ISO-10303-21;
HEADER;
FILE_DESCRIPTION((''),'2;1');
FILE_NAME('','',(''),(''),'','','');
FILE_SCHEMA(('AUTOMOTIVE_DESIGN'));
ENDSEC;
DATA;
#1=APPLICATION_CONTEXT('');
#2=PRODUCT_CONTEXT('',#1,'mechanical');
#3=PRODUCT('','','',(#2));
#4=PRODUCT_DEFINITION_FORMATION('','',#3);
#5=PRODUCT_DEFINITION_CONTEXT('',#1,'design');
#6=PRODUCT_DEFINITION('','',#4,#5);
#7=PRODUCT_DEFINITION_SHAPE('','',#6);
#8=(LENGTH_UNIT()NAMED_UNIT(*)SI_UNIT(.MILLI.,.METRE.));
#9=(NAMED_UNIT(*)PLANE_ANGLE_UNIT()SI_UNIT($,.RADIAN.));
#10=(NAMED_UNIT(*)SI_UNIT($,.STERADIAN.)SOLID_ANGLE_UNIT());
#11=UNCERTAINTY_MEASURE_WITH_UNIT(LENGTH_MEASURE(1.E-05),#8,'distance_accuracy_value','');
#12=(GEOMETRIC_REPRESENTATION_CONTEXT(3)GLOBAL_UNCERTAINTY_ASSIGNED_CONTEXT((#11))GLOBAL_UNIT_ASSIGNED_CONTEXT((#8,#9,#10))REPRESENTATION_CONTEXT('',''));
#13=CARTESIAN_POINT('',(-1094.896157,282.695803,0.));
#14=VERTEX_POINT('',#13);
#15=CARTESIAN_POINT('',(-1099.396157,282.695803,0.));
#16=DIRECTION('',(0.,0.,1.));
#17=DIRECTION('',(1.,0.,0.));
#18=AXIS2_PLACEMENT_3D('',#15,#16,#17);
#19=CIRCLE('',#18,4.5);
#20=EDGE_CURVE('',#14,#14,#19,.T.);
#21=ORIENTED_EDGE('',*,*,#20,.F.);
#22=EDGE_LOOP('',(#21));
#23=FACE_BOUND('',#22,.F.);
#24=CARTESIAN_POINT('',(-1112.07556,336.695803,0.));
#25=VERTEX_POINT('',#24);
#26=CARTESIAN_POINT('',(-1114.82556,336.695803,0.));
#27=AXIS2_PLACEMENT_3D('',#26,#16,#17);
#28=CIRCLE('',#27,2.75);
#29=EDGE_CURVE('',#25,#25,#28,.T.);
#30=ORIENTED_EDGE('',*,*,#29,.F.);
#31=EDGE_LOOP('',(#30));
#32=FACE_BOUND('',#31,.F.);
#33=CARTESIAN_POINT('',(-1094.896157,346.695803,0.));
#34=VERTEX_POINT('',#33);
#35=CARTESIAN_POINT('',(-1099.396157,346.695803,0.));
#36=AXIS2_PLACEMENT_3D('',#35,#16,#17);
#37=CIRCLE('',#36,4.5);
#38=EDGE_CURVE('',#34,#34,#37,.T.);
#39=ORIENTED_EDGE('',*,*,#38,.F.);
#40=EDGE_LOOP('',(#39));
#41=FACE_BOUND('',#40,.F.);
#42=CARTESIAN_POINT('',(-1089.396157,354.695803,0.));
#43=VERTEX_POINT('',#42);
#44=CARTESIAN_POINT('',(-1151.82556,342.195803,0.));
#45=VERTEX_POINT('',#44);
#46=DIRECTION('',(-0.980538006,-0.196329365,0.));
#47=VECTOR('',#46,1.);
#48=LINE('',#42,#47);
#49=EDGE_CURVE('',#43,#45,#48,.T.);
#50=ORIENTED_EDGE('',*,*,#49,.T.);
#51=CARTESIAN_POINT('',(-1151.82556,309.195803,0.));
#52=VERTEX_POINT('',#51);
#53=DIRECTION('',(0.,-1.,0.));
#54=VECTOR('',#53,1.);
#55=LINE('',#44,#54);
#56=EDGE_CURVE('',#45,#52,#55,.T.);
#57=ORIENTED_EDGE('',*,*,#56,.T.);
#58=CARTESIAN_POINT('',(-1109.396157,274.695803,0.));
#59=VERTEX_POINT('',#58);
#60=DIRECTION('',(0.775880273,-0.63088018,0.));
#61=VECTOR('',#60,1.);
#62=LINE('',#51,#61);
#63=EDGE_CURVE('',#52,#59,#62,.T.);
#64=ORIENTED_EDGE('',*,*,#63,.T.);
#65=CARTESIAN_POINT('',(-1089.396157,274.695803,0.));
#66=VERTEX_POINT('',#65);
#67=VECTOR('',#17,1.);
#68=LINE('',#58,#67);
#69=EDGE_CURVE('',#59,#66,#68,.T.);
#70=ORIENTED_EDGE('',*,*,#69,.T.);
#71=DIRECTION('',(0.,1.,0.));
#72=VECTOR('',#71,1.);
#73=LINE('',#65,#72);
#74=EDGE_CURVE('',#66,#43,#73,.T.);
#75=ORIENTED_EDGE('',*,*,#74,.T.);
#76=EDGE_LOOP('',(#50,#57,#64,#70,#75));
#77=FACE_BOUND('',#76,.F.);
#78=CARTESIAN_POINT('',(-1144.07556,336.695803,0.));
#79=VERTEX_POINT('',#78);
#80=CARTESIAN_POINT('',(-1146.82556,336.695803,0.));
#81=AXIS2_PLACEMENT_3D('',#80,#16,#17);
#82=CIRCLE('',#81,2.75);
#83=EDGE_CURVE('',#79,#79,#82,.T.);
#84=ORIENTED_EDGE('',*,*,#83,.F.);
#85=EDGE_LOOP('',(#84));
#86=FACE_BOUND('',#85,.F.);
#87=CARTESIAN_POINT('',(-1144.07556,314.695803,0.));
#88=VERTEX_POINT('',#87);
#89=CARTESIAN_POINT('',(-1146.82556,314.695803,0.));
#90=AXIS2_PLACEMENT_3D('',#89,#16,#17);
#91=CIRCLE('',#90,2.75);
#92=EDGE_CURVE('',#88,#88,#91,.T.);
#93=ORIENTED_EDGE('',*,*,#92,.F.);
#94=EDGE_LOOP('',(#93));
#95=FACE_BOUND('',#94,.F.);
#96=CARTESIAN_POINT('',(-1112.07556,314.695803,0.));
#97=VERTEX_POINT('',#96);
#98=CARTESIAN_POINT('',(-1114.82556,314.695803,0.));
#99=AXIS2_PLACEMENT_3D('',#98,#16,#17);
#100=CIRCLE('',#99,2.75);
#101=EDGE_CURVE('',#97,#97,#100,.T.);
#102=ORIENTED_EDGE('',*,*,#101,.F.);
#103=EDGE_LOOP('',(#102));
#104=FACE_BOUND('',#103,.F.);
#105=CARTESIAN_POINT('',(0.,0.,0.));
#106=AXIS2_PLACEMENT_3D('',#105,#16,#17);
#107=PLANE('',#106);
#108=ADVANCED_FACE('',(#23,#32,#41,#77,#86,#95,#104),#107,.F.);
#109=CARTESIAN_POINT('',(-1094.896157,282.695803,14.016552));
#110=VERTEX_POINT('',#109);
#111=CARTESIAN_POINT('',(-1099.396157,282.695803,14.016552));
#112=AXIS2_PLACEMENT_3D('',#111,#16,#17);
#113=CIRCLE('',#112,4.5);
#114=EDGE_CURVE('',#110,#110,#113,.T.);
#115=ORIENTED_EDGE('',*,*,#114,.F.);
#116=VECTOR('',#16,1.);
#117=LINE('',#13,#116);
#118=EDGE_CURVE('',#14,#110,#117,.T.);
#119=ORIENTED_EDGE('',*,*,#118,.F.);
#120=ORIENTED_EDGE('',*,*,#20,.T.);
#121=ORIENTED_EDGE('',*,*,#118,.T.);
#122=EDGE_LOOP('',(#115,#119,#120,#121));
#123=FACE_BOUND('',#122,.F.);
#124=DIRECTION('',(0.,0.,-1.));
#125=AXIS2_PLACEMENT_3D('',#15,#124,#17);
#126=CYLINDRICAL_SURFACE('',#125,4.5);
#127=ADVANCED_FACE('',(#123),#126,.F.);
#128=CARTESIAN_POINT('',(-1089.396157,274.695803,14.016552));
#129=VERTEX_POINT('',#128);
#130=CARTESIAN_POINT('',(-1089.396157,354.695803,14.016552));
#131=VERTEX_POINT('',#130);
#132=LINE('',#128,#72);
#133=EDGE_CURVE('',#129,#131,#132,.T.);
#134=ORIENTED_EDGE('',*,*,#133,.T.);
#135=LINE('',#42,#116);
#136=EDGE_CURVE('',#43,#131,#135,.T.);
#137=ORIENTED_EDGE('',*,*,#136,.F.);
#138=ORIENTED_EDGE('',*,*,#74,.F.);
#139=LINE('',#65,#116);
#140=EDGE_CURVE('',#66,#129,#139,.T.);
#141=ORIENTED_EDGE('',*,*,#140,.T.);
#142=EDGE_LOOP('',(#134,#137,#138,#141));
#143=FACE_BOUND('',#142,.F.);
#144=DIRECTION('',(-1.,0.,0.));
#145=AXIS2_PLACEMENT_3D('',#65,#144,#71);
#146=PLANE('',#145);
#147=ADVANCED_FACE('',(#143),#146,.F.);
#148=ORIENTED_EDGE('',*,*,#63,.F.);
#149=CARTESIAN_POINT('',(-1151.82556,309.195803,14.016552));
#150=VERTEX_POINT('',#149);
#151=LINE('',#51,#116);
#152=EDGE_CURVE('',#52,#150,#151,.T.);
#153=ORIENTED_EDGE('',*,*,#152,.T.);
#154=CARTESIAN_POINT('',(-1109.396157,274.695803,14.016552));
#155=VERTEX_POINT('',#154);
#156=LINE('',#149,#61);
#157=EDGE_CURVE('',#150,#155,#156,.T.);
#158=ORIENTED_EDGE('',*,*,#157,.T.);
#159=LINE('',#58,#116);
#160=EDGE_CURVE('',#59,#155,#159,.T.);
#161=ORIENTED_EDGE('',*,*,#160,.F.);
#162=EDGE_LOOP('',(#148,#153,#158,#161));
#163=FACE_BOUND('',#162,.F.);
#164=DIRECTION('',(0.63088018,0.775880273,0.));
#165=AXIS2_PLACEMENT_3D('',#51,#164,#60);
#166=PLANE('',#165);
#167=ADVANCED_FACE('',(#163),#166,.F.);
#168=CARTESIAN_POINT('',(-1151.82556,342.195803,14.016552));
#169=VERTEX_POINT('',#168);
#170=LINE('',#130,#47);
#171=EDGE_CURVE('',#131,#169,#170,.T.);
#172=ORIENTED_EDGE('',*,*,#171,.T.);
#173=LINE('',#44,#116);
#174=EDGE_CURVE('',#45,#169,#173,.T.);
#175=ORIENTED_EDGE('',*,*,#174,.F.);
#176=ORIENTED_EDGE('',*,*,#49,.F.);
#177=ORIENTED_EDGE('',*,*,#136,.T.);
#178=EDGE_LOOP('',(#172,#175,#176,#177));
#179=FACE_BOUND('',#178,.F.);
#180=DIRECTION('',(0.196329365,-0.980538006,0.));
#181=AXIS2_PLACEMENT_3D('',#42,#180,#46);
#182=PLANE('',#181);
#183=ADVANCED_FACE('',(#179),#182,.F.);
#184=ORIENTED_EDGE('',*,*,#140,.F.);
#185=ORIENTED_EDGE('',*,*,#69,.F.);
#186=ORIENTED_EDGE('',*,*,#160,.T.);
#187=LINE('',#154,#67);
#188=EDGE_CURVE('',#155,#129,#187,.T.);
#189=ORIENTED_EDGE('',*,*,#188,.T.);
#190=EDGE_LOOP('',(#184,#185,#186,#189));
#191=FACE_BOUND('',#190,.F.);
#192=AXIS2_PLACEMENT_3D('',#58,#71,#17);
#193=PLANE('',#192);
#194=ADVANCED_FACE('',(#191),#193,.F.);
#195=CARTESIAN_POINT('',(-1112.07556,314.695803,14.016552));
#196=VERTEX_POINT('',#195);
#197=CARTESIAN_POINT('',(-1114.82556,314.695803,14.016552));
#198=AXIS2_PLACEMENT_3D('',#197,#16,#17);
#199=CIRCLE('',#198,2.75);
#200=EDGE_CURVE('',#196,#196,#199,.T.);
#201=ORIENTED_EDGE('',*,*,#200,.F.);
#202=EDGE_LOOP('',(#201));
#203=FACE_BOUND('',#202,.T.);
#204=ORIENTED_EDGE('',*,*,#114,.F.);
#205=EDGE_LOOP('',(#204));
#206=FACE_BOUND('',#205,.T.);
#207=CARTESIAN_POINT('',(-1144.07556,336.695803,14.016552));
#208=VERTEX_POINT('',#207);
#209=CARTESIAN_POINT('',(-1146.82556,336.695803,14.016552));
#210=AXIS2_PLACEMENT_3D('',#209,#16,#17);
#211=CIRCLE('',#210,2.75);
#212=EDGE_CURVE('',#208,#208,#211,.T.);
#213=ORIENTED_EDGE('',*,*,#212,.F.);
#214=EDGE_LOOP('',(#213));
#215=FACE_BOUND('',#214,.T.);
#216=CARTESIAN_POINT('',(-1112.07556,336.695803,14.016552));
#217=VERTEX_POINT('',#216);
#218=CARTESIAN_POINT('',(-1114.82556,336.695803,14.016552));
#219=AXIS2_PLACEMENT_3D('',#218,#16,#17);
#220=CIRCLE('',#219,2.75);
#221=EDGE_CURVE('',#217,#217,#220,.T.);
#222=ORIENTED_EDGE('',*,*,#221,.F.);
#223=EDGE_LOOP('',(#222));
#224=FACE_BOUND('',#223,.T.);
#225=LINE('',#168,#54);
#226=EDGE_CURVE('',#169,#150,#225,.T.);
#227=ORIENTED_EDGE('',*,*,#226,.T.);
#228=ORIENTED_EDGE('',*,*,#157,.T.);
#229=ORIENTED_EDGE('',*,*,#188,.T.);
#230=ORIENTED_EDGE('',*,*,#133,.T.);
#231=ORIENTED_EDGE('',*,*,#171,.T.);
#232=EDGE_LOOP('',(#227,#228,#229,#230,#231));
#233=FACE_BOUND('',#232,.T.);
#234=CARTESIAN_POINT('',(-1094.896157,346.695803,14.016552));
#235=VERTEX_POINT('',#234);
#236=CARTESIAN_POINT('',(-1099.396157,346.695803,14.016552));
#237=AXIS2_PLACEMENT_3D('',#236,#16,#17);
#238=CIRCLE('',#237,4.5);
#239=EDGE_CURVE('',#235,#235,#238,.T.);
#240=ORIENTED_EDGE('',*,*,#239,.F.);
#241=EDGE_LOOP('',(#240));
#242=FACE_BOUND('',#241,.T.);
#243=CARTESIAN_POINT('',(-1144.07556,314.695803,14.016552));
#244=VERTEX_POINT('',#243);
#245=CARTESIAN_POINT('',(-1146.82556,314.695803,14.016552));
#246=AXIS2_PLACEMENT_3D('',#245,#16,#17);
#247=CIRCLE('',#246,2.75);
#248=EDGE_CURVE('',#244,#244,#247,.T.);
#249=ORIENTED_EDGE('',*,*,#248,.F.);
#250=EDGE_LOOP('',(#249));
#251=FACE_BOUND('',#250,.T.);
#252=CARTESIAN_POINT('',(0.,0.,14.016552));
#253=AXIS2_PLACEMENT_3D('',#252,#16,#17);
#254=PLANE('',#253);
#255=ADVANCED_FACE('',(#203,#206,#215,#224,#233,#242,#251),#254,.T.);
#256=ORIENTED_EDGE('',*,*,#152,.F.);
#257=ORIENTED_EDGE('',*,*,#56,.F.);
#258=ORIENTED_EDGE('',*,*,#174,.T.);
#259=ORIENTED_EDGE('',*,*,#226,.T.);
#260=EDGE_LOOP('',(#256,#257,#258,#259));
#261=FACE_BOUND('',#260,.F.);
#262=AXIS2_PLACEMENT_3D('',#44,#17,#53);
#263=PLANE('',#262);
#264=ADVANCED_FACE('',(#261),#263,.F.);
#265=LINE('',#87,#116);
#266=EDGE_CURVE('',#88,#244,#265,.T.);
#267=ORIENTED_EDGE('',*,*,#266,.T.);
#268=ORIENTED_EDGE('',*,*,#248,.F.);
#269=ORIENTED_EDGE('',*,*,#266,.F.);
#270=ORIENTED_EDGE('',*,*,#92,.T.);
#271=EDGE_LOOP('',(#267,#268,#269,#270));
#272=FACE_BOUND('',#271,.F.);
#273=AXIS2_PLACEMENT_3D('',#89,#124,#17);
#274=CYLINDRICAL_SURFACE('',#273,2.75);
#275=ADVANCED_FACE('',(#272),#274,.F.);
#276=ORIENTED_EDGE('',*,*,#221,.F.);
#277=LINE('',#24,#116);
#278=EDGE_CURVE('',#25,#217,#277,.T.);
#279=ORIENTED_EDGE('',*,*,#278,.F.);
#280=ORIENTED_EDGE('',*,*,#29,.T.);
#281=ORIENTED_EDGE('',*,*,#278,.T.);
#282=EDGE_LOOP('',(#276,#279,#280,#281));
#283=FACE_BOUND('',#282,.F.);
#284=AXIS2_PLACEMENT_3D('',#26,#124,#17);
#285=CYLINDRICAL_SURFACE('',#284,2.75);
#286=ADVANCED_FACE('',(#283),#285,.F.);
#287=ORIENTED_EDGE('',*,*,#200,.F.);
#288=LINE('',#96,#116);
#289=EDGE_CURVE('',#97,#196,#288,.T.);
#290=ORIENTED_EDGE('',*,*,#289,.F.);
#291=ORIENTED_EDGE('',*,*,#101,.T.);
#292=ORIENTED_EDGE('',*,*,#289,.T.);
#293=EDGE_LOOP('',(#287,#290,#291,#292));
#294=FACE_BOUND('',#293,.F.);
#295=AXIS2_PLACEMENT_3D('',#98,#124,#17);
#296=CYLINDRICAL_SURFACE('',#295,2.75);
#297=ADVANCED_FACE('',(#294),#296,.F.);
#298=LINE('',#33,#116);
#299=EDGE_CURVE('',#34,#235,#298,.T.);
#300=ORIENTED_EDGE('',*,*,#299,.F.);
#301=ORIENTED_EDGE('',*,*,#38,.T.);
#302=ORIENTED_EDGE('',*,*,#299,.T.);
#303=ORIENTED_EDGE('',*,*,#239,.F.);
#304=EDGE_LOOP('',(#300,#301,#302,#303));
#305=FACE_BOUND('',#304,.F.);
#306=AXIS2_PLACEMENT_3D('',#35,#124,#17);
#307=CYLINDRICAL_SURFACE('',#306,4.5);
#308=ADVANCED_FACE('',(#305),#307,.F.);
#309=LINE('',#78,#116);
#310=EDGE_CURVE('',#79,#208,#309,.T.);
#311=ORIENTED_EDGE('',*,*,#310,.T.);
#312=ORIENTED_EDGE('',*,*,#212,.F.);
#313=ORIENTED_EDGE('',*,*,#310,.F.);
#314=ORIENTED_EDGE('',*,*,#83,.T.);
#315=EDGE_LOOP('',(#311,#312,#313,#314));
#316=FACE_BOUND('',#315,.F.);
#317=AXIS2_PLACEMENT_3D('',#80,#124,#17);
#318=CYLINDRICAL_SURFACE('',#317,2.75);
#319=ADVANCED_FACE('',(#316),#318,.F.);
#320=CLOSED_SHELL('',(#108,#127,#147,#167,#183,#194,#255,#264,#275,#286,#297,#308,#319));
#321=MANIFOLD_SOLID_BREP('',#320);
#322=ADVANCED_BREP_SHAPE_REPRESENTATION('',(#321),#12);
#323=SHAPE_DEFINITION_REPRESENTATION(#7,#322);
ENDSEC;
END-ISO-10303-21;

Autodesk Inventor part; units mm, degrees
ref_plane "YZ Plane" through (0, 0, 0) normal (1, 0, 0) x (0, 1, 0)
ref_plane "XZ Plane" through (0, 0, 0) normal (0, 1, 0) x (-1, 0, 0)
ref_plane "XY Plane" through (0, 0, 0) normal (0, 0, 1) x (1, 0, 0)
sketch "スケッチ1 outline for 押し出し1" plane through (0, 0, 0) normal (0, 0, 1) x (1, 0, 0)
  line L0 (-1089.396157, 354.695803) -> (-1151.82556, 342.195803)
  line L1 (-1089.396157, 274.695803) -> (-1089.396157, 354.695803)
  line L2 (-1151.82556, 342.195803) -> (-1151.82556, 309.195803)
  line L3 (-1109.396157, 274.695803) -> (-1089.396157, 274.695803)
  line L4 (-1151.82556, 309.195803) -> (-1109.396157, 274.695803)
  circle A0 centre (-1099.396157, 282.695803) radius 4.5
  circle A1 centre (-1146.82556, 314.695803) radius 2.75
  circle A2 centre (-1146.82556, 336.695803) radius 2.75
  circle A3 centre (-1114.82556, 314.695803) radius 2.75
  circle A4 centre (-1114.82556, 336.695803) radius 2.75
  circle A5 centre (-1099.396157, 346.695803) radius 4.5
extrude "押し出し1" add sketch "スケッチ1 outline for 押し出し1" along normal blind 14.016552
